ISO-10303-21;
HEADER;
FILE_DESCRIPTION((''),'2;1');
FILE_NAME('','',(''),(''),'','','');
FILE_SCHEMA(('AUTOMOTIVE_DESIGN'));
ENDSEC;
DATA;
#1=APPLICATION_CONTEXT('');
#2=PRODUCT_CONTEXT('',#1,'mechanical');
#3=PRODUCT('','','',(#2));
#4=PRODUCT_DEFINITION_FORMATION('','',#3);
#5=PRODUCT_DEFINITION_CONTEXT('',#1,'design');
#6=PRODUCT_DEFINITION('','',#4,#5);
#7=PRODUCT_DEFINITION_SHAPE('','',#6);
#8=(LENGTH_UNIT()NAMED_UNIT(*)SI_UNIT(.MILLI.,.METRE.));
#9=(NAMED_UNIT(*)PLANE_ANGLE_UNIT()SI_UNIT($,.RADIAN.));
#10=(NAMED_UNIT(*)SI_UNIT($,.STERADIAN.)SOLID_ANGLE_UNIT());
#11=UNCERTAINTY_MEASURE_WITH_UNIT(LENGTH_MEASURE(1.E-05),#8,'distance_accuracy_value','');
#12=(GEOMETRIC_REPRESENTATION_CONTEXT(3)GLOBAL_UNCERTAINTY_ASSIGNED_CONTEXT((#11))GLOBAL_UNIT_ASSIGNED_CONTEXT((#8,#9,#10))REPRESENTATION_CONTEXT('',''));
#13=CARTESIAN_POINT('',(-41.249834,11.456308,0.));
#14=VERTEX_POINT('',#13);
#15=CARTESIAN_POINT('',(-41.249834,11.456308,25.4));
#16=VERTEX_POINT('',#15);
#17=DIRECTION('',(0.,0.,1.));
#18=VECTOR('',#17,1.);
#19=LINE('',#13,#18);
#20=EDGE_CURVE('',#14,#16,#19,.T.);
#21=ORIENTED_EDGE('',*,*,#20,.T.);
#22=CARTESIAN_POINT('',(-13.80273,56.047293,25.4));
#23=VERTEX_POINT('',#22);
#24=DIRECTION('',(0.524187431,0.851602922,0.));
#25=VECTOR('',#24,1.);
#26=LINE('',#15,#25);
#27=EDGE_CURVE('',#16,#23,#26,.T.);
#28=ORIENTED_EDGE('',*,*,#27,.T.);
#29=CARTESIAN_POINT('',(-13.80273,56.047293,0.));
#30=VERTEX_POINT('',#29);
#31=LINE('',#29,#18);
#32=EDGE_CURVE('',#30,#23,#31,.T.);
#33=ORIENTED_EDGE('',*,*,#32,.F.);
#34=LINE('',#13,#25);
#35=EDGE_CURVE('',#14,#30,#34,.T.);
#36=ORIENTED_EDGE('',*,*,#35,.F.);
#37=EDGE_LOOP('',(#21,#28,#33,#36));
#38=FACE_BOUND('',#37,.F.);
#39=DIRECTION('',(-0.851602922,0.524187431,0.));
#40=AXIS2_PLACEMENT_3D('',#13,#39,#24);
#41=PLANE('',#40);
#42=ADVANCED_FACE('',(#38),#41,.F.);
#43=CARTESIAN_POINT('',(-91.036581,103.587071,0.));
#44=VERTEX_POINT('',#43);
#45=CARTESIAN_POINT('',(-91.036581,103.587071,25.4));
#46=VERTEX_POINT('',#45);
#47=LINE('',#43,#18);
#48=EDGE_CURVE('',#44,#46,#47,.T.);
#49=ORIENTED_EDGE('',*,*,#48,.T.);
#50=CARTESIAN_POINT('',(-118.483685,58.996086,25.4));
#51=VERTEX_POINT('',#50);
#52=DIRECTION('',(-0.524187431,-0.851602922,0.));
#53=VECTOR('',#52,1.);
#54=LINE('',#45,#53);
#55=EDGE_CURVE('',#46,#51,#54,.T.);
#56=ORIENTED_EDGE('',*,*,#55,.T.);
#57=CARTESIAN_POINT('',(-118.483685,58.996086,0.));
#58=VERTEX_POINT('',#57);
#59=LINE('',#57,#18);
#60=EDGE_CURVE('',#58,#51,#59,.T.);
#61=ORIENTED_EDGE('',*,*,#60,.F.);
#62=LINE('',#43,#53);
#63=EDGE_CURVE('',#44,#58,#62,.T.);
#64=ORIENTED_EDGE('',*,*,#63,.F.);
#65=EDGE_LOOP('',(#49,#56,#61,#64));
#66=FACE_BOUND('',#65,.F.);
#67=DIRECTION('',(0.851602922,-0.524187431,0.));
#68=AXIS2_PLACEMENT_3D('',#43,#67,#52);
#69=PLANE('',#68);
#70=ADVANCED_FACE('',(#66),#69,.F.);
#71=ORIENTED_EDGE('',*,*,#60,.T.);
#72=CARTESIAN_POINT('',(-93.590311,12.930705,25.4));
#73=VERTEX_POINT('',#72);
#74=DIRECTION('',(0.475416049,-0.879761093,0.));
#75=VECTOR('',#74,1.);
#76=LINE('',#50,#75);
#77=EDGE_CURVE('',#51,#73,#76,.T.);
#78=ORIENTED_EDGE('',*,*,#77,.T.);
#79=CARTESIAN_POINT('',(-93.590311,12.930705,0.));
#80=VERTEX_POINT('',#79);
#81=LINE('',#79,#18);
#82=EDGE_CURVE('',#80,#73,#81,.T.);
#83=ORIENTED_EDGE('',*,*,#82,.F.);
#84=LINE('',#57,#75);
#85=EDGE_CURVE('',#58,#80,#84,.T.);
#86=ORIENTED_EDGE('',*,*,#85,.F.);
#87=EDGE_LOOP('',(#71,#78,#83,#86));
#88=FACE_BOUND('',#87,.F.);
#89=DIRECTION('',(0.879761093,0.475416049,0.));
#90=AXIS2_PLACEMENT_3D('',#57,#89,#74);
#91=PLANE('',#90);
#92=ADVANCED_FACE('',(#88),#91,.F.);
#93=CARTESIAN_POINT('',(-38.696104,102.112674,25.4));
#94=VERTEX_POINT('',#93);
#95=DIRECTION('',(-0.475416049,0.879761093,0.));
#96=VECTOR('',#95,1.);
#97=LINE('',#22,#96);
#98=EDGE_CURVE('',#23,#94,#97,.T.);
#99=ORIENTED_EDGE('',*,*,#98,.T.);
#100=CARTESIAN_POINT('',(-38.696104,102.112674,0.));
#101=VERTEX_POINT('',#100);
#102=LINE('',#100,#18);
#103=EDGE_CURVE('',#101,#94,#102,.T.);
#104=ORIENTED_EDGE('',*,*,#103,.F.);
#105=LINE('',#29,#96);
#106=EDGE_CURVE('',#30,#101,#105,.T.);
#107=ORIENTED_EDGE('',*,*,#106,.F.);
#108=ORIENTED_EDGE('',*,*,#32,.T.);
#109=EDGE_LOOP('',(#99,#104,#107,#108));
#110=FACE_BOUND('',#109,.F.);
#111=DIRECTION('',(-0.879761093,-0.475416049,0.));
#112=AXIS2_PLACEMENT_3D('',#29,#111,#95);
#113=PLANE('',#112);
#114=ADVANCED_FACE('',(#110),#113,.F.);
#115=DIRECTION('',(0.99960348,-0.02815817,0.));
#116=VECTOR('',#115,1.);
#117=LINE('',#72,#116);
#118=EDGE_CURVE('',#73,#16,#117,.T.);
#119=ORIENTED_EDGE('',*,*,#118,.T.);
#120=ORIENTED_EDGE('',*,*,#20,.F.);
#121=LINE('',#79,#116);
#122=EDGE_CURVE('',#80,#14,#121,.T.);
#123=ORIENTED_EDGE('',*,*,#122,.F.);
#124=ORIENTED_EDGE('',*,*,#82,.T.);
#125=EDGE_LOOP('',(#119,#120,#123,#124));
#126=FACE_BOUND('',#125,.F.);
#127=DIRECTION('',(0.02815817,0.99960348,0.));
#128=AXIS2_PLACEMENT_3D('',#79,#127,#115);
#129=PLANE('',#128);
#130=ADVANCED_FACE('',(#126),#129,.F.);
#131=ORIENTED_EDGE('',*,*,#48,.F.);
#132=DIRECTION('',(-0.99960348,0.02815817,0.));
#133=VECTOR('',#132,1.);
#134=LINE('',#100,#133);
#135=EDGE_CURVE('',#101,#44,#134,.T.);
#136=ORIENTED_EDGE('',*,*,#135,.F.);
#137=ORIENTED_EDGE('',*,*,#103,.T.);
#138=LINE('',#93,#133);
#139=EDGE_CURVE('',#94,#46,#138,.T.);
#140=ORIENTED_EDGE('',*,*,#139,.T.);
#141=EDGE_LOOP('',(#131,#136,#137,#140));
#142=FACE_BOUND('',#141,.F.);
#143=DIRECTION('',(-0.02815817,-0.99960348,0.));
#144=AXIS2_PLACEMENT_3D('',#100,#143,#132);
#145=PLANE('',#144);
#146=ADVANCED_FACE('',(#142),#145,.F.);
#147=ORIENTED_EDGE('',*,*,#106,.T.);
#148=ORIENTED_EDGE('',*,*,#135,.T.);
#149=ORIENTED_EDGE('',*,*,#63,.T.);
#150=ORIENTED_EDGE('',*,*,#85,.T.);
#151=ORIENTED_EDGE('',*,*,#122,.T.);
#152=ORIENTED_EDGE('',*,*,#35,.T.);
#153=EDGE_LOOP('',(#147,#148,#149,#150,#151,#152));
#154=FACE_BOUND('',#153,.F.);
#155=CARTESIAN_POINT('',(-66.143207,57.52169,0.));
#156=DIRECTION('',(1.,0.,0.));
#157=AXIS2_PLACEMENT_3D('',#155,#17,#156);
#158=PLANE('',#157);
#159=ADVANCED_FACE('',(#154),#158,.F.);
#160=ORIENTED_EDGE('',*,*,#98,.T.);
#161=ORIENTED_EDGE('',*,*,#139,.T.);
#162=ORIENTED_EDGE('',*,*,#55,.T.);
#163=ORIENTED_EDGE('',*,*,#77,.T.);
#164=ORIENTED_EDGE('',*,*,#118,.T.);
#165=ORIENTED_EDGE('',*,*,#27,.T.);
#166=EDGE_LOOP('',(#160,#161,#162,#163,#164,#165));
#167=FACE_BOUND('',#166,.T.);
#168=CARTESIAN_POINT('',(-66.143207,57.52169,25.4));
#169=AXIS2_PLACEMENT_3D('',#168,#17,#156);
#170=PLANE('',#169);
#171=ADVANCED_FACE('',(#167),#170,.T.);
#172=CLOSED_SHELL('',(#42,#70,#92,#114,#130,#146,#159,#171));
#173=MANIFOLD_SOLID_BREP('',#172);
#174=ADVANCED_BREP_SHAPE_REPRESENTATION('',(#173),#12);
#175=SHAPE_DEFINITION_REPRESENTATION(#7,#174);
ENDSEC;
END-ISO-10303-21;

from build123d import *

# Parameters (mm, degrees)
F3_DEPTH = 25.4


# Not quite as in the source:
# - the program builds the solid bodies; features that only make, move or delete a surface that nothing else refers to are left out


with BuildPart() as f3:
    # F2 (on face) → F3 (new body)
    with BuildSketch(Plane.XY):
        Polygon((-91.0365809017, 103.5870710301), (-118.4836845583, 58.9960863901), (-93.5903109086, 12.9307050432), (-41.2498336023, 11.4563083363), (-13.8027299458, 56.0472929763), (-38.6961035955, 102.1126743232), align=None)
    extrude(amount=F3_DEPTH)


solid = f3.part
